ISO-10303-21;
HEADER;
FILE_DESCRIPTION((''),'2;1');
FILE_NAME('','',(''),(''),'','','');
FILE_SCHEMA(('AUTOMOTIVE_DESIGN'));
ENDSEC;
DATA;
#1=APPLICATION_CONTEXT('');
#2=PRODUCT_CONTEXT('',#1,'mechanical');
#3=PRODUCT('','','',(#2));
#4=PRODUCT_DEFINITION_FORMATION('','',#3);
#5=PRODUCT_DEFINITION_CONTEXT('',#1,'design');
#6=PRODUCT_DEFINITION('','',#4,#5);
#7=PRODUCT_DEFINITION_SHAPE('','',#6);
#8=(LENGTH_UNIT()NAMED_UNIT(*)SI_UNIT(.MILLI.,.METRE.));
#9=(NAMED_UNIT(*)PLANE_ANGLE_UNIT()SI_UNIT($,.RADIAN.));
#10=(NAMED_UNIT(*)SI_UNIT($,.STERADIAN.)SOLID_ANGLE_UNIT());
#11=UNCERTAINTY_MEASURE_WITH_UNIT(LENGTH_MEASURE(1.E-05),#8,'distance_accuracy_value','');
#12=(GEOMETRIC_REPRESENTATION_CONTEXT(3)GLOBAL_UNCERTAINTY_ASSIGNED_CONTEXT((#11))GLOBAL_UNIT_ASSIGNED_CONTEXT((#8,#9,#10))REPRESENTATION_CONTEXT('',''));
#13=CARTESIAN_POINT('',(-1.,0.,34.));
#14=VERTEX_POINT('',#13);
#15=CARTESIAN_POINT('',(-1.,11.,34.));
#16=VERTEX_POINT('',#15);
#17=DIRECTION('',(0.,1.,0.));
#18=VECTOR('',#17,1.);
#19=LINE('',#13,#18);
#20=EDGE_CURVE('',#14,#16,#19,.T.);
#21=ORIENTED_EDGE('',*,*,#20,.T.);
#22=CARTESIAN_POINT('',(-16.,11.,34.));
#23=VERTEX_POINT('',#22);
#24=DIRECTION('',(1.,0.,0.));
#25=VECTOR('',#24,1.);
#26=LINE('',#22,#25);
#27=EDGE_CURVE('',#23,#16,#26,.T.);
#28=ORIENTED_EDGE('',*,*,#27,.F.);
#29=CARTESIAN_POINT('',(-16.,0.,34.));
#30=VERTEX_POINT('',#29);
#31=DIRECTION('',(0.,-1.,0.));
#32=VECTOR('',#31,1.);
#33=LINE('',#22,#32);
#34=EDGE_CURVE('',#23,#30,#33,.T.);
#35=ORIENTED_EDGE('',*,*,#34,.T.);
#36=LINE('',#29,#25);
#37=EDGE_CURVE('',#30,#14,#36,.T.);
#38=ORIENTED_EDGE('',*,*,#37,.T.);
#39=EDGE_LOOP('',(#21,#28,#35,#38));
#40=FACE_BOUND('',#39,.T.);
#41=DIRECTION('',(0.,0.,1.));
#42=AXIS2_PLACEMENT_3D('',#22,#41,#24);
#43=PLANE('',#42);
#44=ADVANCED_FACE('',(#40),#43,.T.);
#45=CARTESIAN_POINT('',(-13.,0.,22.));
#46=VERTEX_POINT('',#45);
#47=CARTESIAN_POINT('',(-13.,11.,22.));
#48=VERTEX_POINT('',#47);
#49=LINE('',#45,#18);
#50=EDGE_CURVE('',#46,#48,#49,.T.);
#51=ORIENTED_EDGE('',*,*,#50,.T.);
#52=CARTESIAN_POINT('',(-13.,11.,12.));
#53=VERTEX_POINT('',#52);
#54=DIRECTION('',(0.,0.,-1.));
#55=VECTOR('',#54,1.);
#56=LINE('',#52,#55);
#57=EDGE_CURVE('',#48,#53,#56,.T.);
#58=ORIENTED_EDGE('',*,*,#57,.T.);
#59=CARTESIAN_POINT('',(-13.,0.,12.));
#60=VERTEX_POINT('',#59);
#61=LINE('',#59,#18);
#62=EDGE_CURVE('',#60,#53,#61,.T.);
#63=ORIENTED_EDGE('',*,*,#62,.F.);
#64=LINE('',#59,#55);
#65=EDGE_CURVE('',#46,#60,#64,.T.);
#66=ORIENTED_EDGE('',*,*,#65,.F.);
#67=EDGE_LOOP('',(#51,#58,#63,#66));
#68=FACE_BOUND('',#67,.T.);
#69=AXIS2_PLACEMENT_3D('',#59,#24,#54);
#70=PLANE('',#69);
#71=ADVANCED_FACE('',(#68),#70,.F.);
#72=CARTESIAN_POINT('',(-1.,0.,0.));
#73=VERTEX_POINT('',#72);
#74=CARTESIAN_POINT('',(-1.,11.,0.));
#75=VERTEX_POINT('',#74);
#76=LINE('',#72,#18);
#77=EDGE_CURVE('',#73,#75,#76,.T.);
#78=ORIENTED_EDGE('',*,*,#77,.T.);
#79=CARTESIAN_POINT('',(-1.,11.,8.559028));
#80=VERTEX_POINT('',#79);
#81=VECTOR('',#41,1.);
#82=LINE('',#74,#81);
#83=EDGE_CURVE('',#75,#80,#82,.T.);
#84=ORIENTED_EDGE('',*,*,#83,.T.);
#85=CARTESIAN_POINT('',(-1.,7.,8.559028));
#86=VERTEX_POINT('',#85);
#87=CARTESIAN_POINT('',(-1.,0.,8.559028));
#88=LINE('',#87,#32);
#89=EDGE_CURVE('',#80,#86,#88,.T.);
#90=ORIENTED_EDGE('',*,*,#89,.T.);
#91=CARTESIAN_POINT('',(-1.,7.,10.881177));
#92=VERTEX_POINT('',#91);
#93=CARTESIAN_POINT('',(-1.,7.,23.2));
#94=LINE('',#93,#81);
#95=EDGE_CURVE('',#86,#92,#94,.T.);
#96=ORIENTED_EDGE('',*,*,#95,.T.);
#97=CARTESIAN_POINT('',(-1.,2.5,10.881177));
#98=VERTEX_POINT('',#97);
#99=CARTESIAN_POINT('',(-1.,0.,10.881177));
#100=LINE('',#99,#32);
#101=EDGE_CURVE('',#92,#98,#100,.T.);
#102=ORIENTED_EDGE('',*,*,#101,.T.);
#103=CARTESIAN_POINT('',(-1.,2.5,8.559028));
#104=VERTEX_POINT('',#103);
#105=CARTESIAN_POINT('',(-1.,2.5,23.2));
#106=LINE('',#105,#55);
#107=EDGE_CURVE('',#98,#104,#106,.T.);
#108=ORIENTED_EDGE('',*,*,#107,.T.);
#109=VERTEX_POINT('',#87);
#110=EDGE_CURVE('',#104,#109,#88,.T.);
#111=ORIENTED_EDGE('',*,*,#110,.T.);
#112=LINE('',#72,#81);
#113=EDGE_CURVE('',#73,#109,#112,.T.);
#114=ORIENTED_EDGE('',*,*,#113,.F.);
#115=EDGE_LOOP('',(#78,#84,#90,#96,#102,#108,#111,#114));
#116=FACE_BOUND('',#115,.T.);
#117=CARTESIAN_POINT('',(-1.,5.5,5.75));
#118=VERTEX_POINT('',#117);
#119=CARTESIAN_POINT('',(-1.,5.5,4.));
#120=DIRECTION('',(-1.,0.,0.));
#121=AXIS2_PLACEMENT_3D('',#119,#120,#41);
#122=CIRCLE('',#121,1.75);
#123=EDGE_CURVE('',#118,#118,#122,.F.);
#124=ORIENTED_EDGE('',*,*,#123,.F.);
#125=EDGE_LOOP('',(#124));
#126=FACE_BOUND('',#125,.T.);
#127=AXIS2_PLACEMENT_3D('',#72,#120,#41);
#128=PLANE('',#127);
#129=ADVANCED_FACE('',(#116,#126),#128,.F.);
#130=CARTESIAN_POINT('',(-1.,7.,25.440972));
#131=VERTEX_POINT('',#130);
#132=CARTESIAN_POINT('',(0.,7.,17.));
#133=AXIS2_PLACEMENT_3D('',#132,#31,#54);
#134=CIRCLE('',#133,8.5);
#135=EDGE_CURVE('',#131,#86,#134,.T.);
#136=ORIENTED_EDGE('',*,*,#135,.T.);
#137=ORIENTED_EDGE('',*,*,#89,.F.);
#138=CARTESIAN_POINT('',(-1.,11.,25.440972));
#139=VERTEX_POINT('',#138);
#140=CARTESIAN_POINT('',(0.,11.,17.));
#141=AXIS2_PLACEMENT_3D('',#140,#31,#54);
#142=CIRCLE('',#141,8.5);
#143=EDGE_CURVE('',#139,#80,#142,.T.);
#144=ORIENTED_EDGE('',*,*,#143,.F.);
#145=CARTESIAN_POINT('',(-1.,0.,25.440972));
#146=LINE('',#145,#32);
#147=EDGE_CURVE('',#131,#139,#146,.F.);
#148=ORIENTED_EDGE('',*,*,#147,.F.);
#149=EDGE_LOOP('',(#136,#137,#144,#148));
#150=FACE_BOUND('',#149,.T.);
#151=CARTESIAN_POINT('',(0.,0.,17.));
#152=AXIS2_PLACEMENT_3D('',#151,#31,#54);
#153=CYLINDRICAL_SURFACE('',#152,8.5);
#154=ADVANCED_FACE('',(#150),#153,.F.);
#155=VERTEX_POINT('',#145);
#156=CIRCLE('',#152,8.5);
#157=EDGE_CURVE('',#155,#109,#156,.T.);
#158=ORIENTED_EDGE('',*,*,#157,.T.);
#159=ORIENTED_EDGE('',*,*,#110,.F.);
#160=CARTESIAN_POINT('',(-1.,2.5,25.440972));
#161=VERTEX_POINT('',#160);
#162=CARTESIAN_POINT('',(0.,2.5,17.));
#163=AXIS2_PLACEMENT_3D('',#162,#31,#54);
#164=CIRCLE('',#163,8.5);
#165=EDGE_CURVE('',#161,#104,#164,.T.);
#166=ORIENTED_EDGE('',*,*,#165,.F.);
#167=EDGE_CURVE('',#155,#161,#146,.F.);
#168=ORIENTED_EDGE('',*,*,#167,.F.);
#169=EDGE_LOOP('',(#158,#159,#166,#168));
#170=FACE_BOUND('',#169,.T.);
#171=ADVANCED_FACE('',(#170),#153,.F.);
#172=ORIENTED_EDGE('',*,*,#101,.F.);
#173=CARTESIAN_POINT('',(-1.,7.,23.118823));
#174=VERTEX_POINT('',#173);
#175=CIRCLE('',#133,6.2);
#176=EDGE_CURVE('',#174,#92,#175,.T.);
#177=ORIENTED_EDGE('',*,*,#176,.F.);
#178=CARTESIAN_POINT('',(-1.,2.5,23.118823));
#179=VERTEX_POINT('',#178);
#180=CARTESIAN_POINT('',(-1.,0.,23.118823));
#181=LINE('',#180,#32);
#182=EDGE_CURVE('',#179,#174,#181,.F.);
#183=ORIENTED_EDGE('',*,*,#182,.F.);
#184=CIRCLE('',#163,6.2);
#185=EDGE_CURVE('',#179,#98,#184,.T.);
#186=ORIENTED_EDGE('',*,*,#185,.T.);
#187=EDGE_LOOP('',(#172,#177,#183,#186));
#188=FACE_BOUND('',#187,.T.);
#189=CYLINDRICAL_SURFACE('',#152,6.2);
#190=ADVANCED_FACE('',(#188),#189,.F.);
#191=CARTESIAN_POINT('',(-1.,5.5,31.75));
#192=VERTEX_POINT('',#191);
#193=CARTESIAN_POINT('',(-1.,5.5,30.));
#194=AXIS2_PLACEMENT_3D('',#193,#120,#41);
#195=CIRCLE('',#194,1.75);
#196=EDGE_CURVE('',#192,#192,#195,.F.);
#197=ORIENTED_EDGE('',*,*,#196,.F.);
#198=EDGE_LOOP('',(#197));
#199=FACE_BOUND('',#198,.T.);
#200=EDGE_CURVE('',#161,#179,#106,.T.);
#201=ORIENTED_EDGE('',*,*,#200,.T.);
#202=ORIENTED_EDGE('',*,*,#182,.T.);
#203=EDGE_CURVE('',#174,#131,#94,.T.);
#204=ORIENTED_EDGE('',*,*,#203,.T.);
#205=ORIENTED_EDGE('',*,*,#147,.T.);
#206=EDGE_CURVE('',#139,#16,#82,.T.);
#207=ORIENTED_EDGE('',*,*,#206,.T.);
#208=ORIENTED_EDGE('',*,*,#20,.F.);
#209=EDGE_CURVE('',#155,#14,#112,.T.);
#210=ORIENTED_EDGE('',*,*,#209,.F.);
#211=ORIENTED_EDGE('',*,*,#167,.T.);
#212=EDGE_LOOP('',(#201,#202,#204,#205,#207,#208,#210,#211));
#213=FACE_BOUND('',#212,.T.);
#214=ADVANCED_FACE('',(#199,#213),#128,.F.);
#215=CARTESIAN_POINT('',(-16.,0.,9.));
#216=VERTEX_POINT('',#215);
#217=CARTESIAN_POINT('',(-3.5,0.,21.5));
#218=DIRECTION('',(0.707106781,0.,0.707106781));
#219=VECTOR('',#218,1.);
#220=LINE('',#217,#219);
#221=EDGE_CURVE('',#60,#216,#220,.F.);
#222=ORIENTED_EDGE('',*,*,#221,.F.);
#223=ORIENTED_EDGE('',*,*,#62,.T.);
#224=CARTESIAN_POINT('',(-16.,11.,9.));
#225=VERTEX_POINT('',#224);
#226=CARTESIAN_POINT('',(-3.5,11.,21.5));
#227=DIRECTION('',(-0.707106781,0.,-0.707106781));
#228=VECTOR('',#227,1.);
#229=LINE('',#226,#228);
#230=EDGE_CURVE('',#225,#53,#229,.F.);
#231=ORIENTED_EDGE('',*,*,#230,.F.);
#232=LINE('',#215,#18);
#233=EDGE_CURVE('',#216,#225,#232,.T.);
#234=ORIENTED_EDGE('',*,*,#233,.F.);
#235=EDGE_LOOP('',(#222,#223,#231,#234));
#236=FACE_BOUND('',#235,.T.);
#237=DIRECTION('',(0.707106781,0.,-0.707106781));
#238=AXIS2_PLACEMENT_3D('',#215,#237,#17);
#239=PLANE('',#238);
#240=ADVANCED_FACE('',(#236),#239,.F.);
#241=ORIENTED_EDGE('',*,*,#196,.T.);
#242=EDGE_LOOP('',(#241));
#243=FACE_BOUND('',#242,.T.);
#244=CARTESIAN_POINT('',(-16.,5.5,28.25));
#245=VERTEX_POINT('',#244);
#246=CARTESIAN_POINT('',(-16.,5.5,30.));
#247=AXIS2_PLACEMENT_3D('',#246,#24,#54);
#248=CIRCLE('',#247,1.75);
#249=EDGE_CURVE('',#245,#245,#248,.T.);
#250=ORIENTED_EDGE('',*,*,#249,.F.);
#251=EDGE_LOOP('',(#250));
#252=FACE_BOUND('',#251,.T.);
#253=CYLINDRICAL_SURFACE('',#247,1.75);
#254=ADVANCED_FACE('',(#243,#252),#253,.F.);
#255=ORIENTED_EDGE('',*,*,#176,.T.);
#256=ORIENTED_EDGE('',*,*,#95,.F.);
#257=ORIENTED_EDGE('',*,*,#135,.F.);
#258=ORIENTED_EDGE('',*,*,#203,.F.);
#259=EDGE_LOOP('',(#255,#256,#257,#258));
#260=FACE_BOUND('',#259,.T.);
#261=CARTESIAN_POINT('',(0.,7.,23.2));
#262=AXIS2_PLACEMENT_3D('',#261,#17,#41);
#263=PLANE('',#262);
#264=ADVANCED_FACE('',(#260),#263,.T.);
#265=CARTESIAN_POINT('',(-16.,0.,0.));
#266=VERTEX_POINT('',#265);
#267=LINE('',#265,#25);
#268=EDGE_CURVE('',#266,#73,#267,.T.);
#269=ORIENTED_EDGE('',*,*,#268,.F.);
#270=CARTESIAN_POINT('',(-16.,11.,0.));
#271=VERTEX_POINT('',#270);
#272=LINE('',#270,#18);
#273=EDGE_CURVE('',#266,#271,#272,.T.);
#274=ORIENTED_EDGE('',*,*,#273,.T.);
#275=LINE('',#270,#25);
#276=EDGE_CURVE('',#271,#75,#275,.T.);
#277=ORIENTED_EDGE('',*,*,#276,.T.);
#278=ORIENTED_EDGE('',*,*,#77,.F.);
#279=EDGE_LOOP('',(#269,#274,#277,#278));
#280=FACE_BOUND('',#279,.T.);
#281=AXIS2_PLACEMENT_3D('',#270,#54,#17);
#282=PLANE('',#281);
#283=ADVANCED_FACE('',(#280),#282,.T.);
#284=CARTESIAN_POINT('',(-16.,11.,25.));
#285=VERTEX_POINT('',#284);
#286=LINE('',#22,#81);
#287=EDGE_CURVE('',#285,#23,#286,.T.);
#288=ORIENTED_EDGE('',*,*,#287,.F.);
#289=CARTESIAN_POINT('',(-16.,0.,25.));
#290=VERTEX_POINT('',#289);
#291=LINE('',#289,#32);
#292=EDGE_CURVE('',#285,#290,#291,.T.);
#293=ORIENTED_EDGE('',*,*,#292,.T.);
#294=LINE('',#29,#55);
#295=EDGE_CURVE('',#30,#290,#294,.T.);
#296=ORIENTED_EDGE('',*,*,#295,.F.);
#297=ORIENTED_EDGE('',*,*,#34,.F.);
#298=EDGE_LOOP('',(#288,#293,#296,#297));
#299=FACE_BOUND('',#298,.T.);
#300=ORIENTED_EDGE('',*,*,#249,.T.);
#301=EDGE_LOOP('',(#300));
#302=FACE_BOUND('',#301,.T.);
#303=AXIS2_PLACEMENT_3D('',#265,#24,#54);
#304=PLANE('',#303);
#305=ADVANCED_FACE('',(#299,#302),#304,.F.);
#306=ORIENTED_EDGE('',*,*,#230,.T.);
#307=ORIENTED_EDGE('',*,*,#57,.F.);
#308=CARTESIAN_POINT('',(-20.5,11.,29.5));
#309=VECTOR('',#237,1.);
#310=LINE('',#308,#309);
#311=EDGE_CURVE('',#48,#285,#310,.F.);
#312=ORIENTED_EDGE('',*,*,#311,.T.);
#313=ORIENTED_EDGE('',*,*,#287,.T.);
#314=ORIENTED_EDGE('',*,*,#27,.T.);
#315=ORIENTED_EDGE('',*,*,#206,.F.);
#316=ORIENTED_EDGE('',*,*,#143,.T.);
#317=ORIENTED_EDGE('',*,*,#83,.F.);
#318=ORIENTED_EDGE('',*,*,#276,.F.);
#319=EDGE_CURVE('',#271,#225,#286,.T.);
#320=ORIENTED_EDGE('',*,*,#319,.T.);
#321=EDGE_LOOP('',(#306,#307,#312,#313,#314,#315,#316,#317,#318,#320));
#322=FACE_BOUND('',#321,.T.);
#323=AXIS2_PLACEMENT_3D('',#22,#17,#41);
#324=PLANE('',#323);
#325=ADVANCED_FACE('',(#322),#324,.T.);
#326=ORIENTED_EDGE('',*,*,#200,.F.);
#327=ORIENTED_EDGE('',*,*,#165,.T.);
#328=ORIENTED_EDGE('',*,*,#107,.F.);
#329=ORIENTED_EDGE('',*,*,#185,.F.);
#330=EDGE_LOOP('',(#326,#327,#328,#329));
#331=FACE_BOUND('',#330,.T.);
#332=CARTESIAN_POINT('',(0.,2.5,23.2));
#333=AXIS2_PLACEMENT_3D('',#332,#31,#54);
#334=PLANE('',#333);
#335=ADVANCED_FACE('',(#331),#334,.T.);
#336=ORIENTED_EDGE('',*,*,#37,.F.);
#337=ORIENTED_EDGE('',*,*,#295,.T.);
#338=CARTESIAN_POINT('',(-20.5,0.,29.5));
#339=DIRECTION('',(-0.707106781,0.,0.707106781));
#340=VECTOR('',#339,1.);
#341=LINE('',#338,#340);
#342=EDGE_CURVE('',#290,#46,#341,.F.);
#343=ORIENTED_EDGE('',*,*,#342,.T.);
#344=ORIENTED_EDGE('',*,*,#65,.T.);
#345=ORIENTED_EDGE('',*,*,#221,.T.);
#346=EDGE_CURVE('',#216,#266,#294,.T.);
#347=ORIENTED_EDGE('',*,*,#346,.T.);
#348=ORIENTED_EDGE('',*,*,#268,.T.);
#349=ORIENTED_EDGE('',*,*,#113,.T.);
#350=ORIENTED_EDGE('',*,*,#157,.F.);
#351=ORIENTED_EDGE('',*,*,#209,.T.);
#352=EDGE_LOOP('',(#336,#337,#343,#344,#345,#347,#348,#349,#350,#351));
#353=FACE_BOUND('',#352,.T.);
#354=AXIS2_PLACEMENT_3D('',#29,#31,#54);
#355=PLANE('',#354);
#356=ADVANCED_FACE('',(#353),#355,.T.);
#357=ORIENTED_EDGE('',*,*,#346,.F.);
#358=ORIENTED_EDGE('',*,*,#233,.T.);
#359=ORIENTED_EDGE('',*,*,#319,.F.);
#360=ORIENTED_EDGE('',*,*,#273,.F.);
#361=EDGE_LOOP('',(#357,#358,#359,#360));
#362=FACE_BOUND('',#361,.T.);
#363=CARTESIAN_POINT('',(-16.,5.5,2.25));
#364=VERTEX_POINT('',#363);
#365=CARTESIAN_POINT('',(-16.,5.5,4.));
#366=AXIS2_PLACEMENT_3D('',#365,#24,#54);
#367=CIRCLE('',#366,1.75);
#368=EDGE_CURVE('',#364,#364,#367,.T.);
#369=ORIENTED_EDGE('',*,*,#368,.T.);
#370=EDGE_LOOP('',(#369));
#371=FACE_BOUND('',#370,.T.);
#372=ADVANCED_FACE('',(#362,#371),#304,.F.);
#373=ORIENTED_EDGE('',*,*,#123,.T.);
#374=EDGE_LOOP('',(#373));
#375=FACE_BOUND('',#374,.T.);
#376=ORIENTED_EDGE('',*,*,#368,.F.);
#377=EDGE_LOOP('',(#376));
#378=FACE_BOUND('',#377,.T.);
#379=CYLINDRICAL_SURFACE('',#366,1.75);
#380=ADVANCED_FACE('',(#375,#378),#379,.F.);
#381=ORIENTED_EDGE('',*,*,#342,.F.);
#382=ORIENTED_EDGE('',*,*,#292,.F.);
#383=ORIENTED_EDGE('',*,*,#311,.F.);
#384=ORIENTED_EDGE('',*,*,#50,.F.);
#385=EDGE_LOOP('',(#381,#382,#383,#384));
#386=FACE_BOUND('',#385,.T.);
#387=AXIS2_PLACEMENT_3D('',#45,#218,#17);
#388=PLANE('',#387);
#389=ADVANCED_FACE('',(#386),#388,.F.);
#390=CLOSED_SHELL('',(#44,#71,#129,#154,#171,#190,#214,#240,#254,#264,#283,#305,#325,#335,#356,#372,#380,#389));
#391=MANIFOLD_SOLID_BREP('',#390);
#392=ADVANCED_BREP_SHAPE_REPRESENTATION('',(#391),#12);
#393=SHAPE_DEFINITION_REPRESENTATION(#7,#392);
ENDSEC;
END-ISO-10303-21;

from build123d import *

# Parameters (mm, degrees)
SKETCH2_W           = 34
SKETCH2_H           = 11
SKETCH2_R           = 1.75
BOSS_EXTRUDE1_DEPTH = 16
SKETCH5_W           = 1
SKETCH5_H           = 34
SKETCH5_W_2         = 3
SKETCH5_H_2         = 10
CUT_EXTRUDE1_DEPTH  = 40.153543901
CHAMFER1_SIZE       = 3


with BuildPart() as part:
    # Sketch2 → Boss-Extrude1 (new body)
    with BuildSketch(Plane(origin=(0, 0, 0), x_dir=(0, 0, -1), z_dir=(1, 0, 0))):
        with Locations((-17, 5.5)):
            Rectangle(SKETCH2_W, SKETCH2_H)
        with Locations((-30, 5.5)):
            Circle(SKETCH2_R, mode=Mode.SUBTRACT)
        with Locations((-4, 5.5)):
            Circle(SKETCH2_R, mode=Mode.SUBTRACT)
    extrude(amount=-BOSS_EXTRUDE1_DEPTH)

    # Sketch4 → Cut-Revolve1 (revolve, cut)
    with BuildSketch(Plane(origin=(0, 0, 0), x_dir=(0, 0, -1), z_dir=(1, 0, 0))):
        Polygon((-17, 0), (-25.5, 0), (-25.5, 2.5), (-23.2, 2.5), (-23.2, 7), (-25.5, 7), (-25.5, 11), (-17, 11), align=None)
    revolve(axis=Axis((0, 0, 17), (0, 1, 0)), mode=Mode.SUBTRACT)

    # Sketch5 → Cut-Extrude1 (cut, through all)
    with BuildSketch(Plane(origin=(0, 11, 0), x_dir=(1, 0, 0), z_dir=(0, 1, 0))):
        with Locations((-0.5, -17)):
            Rectangle(SKETCH5_W, SKETCH5_H)
        with Locations((-14.5, -17)):
            Rectangle(SKETCH5_W_2, SKETCH5_H_2)
    extrude(amount=-CUT_EXTRUDE1_DEPTH, mode=Mode.SUBTRACT)

    # Chamfer1
    chamfer1_edges = [part.edges().sort_by_distance(p)[0] for p in [
        (-16, 5.5, 22),
        (-16, 5.5, 12),
    ]]
    chamfer(chamfer1_edges, length=CHAMFER1_SIZE - 0.0001)  # a hair under: the kernel refuses the full size


solid = part.part
